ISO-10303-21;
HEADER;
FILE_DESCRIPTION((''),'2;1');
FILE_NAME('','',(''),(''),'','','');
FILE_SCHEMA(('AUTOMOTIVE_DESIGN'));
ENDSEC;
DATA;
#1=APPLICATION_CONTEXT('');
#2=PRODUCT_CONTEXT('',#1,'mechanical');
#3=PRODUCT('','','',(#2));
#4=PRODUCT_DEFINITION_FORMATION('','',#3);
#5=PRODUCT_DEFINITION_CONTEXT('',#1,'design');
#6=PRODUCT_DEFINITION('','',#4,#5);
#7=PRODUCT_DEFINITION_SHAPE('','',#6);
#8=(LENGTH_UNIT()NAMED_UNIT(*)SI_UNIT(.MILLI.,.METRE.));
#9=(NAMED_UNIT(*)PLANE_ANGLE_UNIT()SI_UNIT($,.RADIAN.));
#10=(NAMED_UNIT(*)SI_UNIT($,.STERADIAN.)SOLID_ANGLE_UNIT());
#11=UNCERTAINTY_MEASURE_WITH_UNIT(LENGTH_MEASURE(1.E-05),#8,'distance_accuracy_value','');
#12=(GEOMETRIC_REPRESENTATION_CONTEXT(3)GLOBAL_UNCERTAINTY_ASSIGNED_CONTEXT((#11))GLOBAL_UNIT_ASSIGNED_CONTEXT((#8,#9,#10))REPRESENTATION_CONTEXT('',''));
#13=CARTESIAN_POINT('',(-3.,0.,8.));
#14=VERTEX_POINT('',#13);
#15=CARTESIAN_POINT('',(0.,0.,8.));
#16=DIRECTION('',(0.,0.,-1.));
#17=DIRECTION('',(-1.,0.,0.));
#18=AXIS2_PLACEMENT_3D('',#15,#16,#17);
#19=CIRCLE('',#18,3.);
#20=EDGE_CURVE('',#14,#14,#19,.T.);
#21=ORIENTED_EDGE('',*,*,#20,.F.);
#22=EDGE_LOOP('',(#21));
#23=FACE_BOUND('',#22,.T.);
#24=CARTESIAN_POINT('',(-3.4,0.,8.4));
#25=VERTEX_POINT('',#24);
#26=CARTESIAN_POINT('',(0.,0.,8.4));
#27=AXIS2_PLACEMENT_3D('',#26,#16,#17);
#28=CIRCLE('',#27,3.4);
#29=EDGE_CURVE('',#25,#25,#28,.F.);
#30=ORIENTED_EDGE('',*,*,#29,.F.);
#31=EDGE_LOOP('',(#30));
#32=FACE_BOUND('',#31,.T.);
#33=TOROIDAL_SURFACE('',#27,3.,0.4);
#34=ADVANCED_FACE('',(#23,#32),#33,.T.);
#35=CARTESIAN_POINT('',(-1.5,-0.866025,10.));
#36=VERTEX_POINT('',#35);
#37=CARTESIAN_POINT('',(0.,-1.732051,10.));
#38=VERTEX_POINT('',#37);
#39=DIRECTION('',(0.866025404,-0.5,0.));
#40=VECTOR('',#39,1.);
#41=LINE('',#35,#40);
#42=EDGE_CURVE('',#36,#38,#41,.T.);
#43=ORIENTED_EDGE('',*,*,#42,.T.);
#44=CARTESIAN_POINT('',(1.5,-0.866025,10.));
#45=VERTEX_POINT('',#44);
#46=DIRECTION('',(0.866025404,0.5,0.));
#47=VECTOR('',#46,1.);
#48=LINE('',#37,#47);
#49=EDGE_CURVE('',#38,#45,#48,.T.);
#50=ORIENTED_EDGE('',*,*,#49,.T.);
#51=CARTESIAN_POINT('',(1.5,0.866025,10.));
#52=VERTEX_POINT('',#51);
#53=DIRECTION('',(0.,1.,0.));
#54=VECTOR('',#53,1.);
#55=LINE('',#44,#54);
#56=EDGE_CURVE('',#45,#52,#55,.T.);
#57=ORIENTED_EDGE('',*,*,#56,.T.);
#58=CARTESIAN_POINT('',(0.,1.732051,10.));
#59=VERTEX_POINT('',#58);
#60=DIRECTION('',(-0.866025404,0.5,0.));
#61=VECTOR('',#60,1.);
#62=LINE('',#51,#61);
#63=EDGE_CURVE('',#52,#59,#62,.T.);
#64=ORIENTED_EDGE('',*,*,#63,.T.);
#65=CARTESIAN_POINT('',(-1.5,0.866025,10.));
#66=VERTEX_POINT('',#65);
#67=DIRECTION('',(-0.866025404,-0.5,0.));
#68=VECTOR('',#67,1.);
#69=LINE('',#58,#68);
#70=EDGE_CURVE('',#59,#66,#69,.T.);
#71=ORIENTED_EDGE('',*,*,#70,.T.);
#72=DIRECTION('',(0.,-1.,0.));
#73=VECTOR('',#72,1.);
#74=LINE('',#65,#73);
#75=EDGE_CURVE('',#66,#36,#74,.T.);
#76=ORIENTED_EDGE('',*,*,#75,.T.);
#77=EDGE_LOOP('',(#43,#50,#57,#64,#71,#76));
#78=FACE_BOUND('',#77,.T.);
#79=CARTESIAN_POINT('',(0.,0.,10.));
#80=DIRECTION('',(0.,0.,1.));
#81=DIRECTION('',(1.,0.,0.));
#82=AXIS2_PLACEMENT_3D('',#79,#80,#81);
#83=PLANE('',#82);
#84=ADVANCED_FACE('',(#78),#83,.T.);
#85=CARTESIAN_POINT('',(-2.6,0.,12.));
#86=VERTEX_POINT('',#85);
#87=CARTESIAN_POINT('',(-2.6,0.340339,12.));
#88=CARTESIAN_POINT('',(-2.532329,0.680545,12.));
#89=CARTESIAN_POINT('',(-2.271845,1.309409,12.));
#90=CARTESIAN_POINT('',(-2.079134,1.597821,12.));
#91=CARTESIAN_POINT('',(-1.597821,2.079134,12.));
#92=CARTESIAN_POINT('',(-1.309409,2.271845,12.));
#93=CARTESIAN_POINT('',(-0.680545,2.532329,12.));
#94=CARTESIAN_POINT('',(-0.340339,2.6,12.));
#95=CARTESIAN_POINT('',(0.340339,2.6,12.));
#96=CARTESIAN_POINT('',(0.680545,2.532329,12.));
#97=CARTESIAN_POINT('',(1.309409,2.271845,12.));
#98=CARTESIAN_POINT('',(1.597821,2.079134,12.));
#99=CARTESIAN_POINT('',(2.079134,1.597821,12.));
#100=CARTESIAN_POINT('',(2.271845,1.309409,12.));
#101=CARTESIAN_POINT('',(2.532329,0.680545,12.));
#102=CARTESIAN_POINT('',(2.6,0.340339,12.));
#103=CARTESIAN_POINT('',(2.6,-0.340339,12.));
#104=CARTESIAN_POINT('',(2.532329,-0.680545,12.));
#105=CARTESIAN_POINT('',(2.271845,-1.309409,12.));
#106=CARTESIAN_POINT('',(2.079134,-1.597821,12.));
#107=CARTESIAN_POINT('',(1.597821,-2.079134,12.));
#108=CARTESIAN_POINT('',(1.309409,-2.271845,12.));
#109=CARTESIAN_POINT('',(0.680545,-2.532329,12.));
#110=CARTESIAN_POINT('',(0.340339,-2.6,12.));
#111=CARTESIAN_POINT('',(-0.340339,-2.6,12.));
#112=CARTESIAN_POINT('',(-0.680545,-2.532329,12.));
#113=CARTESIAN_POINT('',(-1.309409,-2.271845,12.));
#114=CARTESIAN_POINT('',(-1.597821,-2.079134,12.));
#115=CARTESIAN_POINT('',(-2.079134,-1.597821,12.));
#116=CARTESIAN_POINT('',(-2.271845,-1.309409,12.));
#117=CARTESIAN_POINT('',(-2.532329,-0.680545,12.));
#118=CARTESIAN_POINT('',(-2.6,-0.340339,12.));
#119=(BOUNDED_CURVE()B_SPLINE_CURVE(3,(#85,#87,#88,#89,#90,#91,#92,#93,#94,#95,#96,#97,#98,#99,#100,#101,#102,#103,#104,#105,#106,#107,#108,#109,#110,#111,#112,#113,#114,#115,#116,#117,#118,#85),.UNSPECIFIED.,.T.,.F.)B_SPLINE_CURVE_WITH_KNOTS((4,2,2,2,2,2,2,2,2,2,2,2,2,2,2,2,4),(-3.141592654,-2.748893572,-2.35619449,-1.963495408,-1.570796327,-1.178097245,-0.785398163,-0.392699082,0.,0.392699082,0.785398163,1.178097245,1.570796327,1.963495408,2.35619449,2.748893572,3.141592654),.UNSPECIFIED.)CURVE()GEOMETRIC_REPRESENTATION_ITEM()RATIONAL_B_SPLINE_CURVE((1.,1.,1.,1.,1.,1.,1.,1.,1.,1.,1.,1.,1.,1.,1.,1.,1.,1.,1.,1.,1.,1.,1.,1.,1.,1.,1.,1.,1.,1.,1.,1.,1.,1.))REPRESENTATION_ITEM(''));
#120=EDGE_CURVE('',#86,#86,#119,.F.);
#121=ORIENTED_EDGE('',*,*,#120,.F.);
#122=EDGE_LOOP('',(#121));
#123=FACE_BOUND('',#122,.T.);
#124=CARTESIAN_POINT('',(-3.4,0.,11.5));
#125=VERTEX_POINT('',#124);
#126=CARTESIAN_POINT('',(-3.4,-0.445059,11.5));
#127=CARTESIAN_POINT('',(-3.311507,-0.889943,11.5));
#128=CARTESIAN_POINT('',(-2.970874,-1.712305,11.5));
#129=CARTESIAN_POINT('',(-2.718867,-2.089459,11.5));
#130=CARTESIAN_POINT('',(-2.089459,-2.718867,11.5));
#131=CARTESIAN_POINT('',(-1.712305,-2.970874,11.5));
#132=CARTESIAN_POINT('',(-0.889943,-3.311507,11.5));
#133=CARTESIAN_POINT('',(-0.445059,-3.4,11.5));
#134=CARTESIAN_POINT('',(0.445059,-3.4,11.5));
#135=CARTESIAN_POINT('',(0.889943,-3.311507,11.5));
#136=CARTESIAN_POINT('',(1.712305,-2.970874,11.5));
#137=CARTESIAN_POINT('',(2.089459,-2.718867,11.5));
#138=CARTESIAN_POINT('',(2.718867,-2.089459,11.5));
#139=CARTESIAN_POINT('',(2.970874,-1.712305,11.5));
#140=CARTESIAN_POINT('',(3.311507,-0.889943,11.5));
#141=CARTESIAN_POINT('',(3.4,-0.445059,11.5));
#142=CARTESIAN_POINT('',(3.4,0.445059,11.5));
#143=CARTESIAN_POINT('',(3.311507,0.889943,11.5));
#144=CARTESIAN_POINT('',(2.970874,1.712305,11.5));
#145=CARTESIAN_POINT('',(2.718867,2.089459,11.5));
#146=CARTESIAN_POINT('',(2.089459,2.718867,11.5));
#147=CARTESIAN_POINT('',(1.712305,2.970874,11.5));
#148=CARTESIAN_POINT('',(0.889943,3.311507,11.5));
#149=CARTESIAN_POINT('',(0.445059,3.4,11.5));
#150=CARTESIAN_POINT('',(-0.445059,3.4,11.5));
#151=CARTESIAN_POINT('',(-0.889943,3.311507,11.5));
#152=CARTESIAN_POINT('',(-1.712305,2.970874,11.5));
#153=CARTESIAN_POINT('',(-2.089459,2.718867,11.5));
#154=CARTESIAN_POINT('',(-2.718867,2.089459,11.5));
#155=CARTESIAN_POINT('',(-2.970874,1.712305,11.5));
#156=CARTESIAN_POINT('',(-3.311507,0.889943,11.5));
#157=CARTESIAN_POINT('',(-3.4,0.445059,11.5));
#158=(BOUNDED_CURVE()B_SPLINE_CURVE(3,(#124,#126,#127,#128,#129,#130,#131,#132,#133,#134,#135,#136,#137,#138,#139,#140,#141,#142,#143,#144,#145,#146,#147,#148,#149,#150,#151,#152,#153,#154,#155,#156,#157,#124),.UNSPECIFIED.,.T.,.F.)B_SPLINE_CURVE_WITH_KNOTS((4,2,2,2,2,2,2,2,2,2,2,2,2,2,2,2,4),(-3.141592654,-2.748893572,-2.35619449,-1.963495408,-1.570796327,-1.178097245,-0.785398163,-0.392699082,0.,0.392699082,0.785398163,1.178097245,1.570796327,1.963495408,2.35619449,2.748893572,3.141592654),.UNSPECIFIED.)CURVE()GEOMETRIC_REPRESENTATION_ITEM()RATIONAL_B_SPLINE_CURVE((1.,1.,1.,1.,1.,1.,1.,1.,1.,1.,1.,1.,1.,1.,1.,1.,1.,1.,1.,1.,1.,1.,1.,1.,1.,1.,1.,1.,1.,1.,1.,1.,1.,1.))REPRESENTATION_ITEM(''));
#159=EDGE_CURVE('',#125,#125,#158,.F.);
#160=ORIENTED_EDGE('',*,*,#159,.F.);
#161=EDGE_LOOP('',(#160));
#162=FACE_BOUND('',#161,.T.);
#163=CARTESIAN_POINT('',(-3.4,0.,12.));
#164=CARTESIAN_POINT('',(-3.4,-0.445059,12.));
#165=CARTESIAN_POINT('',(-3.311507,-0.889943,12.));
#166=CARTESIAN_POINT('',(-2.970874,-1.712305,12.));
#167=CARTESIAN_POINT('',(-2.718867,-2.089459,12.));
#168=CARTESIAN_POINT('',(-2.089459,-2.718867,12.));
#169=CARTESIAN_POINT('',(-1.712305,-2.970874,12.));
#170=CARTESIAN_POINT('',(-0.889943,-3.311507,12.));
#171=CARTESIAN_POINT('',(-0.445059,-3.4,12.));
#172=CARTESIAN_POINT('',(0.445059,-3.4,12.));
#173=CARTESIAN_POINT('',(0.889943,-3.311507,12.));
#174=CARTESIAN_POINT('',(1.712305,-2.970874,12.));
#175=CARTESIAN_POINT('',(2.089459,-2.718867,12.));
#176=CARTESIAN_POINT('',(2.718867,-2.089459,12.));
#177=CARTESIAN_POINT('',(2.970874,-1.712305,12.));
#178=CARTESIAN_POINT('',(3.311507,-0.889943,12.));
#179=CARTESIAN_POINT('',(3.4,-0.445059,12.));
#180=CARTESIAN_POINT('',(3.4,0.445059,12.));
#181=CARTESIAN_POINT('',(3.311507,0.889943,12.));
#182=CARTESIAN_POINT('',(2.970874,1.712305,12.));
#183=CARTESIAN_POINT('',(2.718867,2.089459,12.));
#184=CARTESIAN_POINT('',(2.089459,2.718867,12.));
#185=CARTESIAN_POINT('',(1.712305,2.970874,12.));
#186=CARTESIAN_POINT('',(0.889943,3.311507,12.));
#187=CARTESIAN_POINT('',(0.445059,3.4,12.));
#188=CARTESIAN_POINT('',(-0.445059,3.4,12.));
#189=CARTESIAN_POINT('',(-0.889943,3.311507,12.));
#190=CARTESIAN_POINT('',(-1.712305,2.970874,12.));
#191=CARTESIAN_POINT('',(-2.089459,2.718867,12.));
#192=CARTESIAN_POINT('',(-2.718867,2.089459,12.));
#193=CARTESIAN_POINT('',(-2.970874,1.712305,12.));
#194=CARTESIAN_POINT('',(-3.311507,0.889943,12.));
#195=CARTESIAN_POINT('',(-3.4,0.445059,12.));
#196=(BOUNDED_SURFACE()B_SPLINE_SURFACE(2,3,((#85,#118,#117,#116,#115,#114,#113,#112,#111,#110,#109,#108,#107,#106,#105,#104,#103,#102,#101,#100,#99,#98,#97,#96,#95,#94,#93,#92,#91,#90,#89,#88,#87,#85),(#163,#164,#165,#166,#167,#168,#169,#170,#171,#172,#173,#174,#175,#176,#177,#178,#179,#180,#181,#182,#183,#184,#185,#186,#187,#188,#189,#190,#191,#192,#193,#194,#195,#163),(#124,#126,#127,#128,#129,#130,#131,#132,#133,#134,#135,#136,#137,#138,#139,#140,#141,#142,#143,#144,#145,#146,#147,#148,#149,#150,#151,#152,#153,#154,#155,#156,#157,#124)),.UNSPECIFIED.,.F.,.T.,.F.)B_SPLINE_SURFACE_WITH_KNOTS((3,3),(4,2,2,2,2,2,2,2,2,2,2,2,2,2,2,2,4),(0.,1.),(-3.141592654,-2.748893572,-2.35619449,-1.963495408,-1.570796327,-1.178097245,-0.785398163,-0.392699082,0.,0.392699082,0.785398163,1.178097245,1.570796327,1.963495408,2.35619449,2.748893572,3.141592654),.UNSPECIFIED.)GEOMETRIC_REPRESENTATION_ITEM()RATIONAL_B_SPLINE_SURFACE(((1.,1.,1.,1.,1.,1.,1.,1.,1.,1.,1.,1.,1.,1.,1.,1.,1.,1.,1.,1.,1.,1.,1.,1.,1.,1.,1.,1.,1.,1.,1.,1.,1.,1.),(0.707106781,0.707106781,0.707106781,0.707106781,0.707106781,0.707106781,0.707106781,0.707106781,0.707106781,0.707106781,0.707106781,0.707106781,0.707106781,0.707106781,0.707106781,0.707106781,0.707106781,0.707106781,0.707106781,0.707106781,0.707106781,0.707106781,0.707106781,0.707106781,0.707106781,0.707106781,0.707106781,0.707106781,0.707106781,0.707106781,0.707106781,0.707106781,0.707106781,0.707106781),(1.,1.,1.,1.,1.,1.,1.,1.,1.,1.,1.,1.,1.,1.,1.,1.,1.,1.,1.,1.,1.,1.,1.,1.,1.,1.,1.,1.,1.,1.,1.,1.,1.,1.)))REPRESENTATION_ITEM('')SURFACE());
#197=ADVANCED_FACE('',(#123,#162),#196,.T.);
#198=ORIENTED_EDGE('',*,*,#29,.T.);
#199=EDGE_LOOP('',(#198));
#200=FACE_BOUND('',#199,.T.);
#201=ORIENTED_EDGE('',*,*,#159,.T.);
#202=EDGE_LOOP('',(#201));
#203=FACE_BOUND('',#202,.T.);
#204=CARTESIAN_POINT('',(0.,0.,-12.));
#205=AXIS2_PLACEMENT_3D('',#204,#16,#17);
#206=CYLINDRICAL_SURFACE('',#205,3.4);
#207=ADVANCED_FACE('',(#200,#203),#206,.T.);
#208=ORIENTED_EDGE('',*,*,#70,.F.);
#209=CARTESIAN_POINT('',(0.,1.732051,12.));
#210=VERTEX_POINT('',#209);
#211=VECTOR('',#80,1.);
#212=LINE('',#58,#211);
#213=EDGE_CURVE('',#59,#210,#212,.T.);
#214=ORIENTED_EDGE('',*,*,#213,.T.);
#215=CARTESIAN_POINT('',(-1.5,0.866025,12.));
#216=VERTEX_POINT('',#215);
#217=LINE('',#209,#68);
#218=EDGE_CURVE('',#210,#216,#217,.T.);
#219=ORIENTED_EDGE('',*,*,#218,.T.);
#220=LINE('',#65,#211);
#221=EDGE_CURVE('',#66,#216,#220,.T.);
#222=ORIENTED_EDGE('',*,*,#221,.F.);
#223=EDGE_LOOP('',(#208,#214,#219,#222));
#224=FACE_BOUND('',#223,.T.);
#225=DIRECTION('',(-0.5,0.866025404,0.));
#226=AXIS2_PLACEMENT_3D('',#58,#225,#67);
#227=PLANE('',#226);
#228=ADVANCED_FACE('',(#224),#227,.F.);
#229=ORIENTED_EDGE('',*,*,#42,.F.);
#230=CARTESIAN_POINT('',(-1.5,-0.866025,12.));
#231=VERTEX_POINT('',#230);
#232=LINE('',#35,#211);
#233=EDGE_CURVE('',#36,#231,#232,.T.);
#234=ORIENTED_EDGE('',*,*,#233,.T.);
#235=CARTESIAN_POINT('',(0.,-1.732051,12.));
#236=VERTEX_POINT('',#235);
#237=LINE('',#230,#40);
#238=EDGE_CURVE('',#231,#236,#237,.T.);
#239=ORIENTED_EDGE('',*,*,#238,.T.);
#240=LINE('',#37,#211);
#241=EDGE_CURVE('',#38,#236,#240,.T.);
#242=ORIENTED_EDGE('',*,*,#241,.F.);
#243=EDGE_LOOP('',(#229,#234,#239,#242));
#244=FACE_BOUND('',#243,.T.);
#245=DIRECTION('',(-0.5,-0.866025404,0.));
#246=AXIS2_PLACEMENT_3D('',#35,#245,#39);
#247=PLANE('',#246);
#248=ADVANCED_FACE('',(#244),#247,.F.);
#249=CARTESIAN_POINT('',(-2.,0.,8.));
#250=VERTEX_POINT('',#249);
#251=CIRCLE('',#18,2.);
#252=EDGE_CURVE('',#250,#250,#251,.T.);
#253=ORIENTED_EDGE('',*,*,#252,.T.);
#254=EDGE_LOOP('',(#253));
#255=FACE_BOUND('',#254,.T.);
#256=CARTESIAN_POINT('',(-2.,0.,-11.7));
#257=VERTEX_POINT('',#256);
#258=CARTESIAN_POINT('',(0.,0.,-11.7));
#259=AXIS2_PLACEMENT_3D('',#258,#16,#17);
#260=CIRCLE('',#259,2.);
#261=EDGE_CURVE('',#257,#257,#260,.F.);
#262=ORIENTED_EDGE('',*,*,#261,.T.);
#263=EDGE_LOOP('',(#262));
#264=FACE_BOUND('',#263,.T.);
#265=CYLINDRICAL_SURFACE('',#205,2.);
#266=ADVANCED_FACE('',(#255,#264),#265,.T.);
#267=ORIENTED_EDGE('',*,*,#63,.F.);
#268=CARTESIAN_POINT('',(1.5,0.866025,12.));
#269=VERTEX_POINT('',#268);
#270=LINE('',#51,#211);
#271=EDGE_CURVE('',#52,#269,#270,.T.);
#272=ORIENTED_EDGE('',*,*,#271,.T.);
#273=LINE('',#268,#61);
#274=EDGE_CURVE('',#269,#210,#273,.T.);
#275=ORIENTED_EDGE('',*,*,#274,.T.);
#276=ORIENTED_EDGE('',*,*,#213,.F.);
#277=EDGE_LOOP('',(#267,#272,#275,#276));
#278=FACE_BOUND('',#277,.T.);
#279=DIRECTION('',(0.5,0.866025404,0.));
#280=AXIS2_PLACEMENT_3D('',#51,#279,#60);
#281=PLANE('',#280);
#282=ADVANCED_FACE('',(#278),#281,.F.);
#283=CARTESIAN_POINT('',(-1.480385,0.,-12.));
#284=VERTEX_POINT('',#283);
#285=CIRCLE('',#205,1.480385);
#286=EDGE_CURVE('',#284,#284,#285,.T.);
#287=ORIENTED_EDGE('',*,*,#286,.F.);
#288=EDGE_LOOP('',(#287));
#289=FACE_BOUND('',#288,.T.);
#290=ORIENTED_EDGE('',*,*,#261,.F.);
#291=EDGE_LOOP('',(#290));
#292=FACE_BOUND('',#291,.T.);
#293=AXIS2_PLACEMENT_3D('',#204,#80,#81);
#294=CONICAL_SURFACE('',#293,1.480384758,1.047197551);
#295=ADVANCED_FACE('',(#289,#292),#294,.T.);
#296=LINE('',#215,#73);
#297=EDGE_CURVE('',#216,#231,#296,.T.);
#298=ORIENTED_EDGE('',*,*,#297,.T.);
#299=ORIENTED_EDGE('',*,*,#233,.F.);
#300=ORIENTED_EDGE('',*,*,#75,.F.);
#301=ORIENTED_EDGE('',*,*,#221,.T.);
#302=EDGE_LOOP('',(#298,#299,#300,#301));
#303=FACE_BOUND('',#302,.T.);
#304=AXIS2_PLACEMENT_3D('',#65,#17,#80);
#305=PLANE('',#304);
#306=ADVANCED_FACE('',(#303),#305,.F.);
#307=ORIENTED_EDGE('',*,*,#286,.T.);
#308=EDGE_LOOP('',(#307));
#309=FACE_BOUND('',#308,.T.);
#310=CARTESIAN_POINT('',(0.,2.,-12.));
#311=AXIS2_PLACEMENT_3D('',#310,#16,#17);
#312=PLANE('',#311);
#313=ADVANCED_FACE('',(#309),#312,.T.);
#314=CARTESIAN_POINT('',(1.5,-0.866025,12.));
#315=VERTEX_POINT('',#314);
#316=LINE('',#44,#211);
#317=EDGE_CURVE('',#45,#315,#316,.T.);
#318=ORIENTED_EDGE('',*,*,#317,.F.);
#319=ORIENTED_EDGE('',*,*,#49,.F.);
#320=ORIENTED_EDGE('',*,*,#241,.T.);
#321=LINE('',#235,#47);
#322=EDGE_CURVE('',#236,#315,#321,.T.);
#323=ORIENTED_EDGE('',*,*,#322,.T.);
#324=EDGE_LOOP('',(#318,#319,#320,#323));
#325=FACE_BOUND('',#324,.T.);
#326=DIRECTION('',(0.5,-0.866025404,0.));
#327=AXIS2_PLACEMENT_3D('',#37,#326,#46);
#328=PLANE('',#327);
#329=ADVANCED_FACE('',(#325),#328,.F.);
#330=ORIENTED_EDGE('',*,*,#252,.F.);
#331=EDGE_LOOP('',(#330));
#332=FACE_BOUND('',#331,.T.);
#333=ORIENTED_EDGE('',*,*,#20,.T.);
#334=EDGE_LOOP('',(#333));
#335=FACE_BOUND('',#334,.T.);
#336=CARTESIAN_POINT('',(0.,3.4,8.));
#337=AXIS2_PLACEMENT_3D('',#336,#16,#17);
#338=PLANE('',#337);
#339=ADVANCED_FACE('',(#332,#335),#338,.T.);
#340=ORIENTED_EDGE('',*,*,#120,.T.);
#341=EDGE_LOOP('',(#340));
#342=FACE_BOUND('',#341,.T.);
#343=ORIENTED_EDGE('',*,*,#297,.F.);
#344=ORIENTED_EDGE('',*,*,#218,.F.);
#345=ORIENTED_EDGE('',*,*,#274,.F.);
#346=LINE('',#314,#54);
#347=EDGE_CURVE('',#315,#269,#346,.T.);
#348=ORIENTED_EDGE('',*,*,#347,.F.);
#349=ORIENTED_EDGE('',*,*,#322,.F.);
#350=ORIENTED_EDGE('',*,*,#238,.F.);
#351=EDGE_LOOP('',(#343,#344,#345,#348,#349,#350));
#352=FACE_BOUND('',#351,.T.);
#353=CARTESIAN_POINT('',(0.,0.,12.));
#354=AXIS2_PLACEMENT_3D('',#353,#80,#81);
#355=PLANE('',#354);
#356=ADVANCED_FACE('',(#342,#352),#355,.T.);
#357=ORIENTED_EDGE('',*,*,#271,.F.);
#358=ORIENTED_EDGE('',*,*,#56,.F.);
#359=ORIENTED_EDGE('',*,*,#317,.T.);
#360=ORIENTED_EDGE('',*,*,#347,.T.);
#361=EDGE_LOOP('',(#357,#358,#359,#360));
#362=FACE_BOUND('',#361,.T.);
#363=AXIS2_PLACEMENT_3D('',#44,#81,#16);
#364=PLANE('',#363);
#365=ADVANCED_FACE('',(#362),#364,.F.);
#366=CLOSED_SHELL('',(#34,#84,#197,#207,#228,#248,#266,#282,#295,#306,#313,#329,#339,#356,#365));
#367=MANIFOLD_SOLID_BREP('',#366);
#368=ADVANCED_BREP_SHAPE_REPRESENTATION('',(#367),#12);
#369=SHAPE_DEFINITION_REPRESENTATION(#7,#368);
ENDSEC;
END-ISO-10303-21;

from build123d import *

# Parameters (mm, degrees)
CHAMFER_1_SIZE      = 0.3
CHAMFER_1_SIZE2     = 0.519615242
FILLET_1_R          = 0.4
FILLET_2_SIZE       = 0.5
FILLET_2_SIZE_2     = 0.8
CUT_EXTRUDE_1_DEPTH = 2


with BuildPart() as part:
    # 草图2 → 旋转1 (revolve)
    with BuildSketch(Plane(origin=(0, 0, 0), x_dir=(0, 0, -1), z_dir=(1, 0, 0)), mode=Mode.PRIVATE) as revolve_1_sk:
        Polygon((-12, 0), (-12, 3.4), (-8, 3.4), (-8, 2), (12, 2), (12, 0), align=None)
    revolve(revolve_1_sk.sketch.rotate(Axis((0, 0, -12), (0, 0, 1)), 90), axis=Axis((0, 0, -12), (0, 0, 1)))

    # 倒角1
    chamfer_1_edges = [part.edges().sort_by_distance(p)[0] for p in [
        (2, 0, -12),
    ]]
    chamfer_1_side = [part.faces().sort_by_distance(p)[0] for p in [
        (2, 0, -2),
    ]]
    chamfer(chamfer_1_edges, length=CHAMFER_1_SIZE, length2=CHAMFER_1_SIZE2, reference=chamfer_1_side[0])

    # 圆角1
    fillet_1_edges = [part.edges().sort_by_distance(p)[0] for p in [
        (3.4, 0, 8),
    ]]
    fillet(fillet_1_edges, radius=FILLET_1_R)

    # 圆角2
    # an asymmetric fillet: 0.8, 0.5 mm, written as the material it takes off along each edge
    with BuildSketch(Plane(origin=(0, 0, 12), x_dir=(-1, 0, 0), z_dir=(0, 1, 0))) as fillet_2_piece_1:
        with BuildLine():
            Bezier((3.4, -FILLET_2_SIZE), (3.4, 0), (3.4 - FILLET_2_SIZE_2, 0), weights=[1, 0.707106781, 1])
            Line((3.4 - FILLET_2_SIZE_2, 0), (3.4, 0))
            Line((3.4, 0), (3.4, -FILLET_2_SIZE))
        make_face()
    revolve(axis=Axis((0, 0, 12), (0, 0, 1)), mode=Mode.SUBTRACT)

    # 草图3 → 切除-拉伸1 (cut)
    with BuildSketch(Plane.XY.offset(12)):
        Polygon((0, 1.732050808), (-1.5, 0.866025404), (-1.5, -0.866025404), (0, -1.732050808), (1.5, -0.866025404), (1.5, 0.866025404), align=None)
    extrude(amount=-CUT_EXTRUDE_1_DEPTH, mode=Mode.SUBTRACT)


solid = part.part
